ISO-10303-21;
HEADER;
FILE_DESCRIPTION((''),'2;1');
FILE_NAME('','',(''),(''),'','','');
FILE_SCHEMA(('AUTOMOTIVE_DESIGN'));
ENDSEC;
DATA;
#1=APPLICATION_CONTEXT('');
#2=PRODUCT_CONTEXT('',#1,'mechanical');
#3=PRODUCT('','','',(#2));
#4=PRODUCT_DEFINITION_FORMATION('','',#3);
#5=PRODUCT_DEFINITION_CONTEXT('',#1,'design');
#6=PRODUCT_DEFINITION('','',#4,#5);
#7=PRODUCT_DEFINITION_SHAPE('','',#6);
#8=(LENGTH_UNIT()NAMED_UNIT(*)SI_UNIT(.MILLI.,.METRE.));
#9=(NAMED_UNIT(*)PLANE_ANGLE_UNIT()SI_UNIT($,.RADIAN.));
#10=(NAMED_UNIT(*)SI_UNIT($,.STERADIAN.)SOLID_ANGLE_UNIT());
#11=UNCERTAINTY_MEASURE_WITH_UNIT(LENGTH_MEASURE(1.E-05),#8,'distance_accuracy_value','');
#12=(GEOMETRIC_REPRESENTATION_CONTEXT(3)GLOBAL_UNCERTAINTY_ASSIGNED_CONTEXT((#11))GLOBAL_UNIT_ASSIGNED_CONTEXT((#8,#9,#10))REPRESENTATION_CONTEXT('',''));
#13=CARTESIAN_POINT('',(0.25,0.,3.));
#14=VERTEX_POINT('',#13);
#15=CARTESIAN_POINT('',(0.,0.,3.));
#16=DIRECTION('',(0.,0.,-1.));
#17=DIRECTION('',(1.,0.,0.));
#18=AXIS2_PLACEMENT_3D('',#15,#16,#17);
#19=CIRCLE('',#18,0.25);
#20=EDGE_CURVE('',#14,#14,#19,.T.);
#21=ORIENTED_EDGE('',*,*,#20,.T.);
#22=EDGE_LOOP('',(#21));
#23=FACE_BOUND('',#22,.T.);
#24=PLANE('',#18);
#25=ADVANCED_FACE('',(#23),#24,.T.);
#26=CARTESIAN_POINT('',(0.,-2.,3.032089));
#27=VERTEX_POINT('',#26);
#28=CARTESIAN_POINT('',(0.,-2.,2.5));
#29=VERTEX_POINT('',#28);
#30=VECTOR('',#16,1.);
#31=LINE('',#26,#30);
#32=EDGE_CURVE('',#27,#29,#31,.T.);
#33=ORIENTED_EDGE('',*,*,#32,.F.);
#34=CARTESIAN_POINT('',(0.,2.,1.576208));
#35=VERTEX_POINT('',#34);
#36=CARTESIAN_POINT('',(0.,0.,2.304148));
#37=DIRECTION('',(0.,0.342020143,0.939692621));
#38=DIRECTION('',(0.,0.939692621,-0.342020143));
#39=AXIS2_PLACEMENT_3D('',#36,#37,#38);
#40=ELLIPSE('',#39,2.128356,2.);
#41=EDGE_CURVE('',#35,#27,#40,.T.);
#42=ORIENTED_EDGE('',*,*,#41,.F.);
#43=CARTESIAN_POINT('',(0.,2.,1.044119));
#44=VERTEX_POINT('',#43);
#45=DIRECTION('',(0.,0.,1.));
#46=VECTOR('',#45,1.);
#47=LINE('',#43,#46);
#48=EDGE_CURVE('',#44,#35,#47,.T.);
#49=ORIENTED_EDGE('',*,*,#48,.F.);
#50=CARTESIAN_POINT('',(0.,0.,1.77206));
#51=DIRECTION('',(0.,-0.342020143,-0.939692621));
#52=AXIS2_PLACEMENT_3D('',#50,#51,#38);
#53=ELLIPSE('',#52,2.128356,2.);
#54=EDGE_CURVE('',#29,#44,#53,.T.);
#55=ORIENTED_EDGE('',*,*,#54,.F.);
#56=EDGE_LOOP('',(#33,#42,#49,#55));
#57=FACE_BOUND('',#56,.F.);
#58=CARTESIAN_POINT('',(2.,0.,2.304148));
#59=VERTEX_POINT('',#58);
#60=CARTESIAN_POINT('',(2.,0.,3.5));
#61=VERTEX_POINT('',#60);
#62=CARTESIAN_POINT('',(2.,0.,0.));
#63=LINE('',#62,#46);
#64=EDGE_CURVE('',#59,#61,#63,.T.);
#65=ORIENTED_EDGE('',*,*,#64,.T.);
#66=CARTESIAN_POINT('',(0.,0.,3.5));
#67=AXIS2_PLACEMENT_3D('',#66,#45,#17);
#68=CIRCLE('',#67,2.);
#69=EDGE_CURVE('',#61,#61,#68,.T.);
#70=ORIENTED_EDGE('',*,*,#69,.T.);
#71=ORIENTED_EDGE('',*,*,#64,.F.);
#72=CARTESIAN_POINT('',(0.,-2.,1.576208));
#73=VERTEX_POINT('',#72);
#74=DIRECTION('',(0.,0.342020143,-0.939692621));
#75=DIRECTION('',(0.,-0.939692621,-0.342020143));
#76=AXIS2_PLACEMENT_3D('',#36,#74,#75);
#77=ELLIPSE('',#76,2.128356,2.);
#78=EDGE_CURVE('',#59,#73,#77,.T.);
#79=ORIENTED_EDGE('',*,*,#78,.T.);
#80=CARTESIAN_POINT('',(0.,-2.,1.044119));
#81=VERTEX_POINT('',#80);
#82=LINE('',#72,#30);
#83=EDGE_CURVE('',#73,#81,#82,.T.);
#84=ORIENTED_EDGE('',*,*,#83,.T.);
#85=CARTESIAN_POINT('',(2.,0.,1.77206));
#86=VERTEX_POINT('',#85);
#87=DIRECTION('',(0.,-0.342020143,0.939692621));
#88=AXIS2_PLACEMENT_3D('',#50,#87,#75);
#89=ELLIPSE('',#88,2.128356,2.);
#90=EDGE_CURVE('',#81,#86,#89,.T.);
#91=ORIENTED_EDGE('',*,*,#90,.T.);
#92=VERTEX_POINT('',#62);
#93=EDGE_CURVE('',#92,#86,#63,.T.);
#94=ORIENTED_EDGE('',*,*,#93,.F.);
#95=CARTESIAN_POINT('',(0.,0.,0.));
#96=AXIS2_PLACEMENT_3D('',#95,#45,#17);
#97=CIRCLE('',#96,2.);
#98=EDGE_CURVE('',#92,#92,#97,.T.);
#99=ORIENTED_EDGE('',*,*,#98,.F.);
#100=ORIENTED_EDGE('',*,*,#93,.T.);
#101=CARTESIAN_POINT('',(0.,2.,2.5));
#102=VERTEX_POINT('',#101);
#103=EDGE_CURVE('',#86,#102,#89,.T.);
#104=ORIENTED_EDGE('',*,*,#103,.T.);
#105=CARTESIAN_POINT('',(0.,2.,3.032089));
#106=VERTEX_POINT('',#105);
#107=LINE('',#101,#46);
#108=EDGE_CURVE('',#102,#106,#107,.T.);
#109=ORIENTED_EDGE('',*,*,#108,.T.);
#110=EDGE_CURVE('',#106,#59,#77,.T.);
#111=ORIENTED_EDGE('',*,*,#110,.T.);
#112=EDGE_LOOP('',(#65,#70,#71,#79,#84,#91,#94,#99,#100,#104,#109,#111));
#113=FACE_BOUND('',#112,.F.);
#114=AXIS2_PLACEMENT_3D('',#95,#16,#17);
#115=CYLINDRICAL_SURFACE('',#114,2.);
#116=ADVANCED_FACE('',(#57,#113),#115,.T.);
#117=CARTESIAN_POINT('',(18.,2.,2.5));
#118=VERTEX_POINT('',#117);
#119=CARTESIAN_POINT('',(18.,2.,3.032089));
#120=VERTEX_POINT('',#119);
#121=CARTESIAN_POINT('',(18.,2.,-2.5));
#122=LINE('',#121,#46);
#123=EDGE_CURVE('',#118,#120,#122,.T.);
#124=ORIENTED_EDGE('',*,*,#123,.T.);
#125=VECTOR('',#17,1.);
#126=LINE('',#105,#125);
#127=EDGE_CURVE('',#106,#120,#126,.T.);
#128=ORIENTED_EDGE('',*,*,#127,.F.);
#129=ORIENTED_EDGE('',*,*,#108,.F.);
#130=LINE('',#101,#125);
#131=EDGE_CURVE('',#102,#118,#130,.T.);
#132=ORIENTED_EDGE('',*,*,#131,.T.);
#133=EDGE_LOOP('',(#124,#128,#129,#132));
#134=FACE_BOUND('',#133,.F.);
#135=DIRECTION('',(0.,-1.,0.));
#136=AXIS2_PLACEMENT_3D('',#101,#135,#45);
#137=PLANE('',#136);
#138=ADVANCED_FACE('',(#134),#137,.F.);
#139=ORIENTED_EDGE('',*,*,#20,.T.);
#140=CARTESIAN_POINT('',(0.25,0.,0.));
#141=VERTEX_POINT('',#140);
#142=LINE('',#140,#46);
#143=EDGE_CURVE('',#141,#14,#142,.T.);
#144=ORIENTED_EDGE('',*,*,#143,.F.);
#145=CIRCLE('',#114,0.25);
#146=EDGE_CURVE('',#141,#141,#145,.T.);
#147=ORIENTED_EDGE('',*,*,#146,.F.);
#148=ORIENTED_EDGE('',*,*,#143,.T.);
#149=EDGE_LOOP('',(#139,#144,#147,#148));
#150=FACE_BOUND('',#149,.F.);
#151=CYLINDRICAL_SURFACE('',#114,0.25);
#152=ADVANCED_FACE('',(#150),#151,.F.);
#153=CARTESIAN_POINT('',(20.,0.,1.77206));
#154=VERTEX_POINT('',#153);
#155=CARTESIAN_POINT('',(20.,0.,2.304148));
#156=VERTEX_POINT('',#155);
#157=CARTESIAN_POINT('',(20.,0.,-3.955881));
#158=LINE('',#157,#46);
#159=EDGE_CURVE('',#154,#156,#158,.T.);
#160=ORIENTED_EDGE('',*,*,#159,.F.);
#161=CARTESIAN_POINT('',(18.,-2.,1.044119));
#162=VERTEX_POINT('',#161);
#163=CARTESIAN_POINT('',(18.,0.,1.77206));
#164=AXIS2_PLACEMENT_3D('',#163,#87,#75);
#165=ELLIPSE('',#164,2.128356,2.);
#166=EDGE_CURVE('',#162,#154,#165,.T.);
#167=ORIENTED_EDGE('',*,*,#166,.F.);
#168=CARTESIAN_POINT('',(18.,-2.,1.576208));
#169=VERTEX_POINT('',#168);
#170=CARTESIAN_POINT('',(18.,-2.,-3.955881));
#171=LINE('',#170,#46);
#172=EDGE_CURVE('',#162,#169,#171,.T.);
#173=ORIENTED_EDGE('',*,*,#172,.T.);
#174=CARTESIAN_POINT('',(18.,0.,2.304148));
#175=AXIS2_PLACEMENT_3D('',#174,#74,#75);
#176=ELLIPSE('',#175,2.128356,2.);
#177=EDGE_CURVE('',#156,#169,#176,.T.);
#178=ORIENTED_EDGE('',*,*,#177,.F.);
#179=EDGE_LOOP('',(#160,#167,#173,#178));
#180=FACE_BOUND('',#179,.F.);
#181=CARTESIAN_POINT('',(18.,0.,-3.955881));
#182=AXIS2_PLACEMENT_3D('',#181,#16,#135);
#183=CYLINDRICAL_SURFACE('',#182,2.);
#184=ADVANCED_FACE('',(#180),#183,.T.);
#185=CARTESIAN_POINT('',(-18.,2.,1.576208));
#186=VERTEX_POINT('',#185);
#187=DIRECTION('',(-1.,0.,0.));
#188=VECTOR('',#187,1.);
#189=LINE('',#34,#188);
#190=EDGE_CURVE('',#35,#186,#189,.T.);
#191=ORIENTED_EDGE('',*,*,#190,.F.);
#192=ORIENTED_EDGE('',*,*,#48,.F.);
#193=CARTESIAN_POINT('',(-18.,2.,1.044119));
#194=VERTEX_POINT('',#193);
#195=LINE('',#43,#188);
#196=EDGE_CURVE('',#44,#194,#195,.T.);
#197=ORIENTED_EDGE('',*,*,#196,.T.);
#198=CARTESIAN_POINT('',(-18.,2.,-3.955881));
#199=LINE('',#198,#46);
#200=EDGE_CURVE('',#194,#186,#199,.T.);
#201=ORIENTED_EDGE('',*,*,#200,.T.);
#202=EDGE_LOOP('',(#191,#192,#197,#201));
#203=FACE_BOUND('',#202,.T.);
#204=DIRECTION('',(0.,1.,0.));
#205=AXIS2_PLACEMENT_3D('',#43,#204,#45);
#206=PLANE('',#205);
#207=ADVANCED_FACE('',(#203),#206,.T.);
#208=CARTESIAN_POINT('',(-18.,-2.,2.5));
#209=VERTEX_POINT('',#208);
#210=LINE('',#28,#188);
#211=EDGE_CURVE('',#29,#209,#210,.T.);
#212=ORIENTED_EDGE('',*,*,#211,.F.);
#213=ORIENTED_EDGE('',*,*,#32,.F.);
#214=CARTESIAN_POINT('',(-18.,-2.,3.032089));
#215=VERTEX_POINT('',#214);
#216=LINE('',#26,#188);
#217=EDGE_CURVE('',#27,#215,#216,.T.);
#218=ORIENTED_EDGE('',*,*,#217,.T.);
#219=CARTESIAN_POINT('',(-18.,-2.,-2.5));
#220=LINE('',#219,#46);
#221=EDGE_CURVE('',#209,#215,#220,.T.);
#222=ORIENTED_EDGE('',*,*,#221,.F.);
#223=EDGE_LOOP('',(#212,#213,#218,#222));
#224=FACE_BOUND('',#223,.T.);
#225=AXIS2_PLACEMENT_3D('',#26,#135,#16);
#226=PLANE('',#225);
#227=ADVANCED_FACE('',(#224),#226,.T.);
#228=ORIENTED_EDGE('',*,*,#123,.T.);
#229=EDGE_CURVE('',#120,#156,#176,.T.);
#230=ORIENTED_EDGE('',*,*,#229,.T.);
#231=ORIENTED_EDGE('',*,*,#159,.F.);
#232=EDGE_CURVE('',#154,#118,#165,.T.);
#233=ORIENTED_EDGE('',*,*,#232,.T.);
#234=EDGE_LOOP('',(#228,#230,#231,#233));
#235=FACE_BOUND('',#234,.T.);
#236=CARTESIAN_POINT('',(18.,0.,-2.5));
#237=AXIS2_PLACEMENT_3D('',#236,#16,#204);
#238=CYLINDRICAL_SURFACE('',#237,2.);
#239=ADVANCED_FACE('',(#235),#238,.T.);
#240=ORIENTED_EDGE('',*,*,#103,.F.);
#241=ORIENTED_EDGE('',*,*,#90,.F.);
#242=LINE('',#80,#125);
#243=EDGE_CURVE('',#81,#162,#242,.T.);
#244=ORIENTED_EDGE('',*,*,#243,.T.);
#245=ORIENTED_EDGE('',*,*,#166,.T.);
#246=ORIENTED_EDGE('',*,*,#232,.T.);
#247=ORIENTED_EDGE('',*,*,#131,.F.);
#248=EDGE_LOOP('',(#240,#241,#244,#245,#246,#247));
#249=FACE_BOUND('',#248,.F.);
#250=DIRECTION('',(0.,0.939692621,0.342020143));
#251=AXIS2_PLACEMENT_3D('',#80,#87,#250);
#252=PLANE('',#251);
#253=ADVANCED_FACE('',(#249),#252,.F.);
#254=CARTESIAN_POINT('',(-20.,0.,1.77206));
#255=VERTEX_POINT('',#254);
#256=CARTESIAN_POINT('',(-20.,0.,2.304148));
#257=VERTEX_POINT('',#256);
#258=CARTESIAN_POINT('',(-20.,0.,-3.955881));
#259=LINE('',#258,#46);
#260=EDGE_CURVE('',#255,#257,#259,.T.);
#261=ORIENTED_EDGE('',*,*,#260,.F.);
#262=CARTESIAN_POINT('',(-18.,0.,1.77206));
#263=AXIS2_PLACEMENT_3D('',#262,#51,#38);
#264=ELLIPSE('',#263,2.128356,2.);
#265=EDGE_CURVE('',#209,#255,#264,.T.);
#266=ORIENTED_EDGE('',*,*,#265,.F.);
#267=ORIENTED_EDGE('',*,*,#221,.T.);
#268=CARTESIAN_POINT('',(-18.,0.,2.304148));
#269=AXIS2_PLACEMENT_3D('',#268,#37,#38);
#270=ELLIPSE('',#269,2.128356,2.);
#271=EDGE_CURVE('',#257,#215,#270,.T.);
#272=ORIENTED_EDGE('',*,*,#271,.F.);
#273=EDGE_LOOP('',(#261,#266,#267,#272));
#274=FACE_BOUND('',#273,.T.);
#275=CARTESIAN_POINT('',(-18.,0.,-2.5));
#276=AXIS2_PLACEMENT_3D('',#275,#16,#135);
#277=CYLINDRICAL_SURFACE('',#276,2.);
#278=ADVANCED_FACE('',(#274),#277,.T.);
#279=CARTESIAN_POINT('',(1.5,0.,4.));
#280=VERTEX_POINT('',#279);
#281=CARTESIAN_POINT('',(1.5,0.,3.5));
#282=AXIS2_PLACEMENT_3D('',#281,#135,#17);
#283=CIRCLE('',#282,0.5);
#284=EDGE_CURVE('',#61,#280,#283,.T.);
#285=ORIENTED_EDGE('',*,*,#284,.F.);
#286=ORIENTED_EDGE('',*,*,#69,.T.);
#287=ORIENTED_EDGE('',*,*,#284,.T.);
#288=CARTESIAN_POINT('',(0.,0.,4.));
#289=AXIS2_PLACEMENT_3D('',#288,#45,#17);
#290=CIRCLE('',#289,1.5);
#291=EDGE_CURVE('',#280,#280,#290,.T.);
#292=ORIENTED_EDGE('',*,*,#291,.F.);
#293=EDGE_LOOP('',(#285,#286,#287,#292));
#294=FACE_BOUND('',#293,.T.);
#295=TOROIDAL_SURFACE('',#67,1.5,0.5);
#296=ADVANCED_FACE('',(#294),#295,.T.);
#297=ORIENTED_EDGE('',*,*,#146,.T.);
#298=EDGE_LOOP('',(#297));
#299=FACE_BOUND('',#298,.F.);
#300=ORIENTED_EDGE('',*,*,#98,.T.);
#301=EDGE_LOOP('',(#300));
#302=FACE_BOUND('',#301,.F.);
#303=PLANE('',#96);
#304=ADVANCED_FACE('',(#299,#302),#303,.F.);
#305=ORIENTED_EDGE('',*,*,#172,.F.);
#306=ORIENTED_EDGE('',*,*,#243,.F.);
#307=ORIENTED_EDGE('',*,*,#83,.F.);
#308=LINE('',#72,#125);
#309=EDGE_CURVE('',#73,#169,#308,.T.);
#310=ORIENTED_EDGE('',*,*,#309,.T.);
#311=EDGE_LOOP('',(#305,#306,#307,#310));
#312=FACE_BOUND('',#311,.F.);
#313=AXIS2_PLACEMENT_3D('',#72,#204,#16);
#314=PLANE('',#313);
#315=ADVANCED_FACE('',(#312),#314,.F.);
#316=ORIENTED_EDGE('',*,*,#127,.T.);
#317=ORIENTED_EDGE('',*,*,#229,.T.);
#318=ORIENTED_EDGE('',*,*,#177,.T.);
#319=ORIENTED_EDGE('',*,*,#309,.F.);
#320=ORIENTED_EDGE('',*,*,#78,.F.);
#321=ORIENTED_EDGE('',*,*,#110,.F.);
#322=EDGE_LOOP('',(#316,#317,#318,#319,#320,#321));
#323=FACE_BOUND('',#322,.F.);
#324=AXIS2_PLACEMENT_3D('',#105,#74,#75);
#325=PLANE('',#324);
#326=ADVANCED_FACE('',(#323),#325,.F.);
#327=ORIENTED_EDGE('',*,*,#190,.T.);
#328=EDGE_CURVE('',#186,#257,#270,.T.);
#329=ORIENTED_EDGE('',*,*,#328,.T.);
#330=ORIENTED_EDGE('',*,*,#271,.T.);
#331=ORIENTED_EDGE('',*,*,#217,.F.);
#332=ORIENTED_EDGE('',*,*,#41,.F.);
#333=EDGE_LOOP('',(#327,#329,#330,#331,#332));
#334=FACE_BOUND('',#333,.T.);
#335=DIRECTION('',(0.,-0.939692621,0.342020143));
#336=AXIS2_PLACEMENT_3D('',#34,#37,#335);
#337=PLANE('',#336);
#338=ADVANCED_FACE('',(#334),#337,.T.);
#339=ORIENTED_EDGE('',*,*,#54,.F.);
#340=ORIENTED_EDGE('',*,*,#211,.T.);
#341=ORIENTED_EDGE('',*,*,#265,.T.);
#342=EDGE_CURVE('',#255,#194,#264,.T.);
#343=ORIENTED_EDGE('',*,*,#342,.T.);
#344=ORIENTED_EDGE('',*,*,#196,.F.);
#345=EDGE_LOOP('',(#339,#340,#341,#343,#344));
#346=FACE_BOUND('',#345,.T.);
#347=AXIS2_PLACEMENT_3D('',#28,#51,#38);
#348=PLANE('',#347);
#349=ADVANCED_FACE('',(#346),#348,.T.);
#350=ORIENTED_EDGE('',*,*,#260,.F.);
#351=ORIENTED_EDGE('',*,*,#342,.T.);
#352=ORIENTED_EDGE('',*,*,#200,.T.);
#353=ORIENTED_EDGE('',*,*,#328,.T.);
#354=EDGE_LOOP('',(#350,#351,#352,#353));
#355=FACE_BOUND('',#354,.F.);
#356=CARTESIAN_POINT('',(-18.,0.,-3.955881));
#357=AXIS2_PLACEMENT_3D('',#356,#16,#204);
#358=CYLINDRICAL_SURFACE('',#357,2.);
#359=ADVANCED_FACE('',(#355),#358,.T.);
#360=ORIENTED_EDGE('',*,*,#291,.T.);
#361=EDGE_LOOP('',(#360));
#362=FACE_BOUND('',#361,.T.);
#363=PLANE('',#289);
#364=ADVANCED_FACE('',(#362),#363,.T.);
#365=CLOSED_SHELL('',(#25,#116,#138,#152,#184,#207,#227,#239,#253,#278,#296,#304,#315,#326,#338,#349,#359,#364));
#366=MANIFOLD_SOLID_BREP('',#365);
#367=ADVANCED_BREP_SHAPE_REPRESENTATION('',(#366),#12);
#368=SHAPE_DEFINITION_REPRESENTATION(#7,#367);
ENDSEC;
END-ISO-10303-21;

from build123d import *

# Parameters (mm, degrees)
F0_R        = 2
F1_DEPTH    = 4
F3_DEPTH    = 20
F5_DEPTH    = 20
F6_T1_DEPTH = 10.5320888862
F6_T3_DEPTH = 10.5320888862
F7_R        = 0.5
F8_R        = 0.25
F9_DEPTH    = 3


# Not quite as in the source:
# - a fillet or chamfer that OpenCascade refuses, or shapes differently, is made with other operations: its cross-section is extruded or revolved along the edge and cut away or added


with BuildPart() as f1:
    # F0 (on Top) → F1 (new body)
    with BuildSketch(Plane.XY):
        Circle(F0_R)
    extrude(amount=F1_DEPTH)

    # F2 (on Right) → F3 (join)
    with BuildSketch(Plane.YZ):
        Polygon((2, 3.0320888862), (-2, 1.5762079492), (-2, 1.0441190629), (2, 2.5), align=None)
    extrude(amount=F3_DEPTH)

    # F4 (on Right) → F5 (join)
    with BuildSketch(Plane.YZ):
        Polygon((2, 1.0441190629), (2, 1.5762079492), (-2, 3.0320888862), (-2, 2.5), align=None)
    extrude(amount=-F5_DEPTH)

    # F6: fillet of radius 2 on 4 edges, made by hand

    # F6_s2 → F6_t1 (cut)
    with BuildSketch(Plane.XY.offset(-3.9558809371)):
        with BuildLine():
            ThreePointArc((-18, 2), (-19.4142135624, 1.4142135624), (-20, 0))
            Line((-20, 0), (-20, 2))
            Line((-20, 2), (-18, 2))
        make_face()
        with BuildLine():
            ThreePointArc((18, -2), (19.4142135624, -1.4142135624), (20, 0))
            Line((20, 0), (20, -2))
            Line((20, -2), (18, -2))
        make_face()
    extrude(amount=F6_T1_DEPTH, mode=Mode.SUBTRACT)

    # F6_s4 → F6_t3 (cut)
    with BuildSketch(Plane.XY.offset(-2.5)):
        with BuildLine():
            ThreePointArc((-18, -2), (-19.4142135624, -1.4142135624), (-20, 0))
            Line((-20, 0), (-20, -2))
            Line((-20, -2), (-18, -2))
        make_face()
        with BuildLine():
            ThreePointArc((18, 2), (19.4142135624, 1.4142135624), (20, 0))
            Line((20, 0), (20, 2))
            Line((20, 2), (18, 2))
        make_face()
    extrude(amount=F6_T3_DEPTH, mode=Mode.SUBTRACT)

    # F7
    f7_edges = [f1.edges().sort_by_distance(p)[0] for p in [
        (-2, 0, 4),
    ]]
    fillet(f7_edges, radius=F7_R)

    # F8 (on face) → F9 (cut)
    with BuildSketch(Plane(origin=(0, 0, 0), x_dir=(1, 0, 0), z_dir=(0, 0, -1))):
        Circle(F8_R)
    extrude(amount=-F9_DEPTH, mode=Mode.SUBTRACT)


solid = f1.part
